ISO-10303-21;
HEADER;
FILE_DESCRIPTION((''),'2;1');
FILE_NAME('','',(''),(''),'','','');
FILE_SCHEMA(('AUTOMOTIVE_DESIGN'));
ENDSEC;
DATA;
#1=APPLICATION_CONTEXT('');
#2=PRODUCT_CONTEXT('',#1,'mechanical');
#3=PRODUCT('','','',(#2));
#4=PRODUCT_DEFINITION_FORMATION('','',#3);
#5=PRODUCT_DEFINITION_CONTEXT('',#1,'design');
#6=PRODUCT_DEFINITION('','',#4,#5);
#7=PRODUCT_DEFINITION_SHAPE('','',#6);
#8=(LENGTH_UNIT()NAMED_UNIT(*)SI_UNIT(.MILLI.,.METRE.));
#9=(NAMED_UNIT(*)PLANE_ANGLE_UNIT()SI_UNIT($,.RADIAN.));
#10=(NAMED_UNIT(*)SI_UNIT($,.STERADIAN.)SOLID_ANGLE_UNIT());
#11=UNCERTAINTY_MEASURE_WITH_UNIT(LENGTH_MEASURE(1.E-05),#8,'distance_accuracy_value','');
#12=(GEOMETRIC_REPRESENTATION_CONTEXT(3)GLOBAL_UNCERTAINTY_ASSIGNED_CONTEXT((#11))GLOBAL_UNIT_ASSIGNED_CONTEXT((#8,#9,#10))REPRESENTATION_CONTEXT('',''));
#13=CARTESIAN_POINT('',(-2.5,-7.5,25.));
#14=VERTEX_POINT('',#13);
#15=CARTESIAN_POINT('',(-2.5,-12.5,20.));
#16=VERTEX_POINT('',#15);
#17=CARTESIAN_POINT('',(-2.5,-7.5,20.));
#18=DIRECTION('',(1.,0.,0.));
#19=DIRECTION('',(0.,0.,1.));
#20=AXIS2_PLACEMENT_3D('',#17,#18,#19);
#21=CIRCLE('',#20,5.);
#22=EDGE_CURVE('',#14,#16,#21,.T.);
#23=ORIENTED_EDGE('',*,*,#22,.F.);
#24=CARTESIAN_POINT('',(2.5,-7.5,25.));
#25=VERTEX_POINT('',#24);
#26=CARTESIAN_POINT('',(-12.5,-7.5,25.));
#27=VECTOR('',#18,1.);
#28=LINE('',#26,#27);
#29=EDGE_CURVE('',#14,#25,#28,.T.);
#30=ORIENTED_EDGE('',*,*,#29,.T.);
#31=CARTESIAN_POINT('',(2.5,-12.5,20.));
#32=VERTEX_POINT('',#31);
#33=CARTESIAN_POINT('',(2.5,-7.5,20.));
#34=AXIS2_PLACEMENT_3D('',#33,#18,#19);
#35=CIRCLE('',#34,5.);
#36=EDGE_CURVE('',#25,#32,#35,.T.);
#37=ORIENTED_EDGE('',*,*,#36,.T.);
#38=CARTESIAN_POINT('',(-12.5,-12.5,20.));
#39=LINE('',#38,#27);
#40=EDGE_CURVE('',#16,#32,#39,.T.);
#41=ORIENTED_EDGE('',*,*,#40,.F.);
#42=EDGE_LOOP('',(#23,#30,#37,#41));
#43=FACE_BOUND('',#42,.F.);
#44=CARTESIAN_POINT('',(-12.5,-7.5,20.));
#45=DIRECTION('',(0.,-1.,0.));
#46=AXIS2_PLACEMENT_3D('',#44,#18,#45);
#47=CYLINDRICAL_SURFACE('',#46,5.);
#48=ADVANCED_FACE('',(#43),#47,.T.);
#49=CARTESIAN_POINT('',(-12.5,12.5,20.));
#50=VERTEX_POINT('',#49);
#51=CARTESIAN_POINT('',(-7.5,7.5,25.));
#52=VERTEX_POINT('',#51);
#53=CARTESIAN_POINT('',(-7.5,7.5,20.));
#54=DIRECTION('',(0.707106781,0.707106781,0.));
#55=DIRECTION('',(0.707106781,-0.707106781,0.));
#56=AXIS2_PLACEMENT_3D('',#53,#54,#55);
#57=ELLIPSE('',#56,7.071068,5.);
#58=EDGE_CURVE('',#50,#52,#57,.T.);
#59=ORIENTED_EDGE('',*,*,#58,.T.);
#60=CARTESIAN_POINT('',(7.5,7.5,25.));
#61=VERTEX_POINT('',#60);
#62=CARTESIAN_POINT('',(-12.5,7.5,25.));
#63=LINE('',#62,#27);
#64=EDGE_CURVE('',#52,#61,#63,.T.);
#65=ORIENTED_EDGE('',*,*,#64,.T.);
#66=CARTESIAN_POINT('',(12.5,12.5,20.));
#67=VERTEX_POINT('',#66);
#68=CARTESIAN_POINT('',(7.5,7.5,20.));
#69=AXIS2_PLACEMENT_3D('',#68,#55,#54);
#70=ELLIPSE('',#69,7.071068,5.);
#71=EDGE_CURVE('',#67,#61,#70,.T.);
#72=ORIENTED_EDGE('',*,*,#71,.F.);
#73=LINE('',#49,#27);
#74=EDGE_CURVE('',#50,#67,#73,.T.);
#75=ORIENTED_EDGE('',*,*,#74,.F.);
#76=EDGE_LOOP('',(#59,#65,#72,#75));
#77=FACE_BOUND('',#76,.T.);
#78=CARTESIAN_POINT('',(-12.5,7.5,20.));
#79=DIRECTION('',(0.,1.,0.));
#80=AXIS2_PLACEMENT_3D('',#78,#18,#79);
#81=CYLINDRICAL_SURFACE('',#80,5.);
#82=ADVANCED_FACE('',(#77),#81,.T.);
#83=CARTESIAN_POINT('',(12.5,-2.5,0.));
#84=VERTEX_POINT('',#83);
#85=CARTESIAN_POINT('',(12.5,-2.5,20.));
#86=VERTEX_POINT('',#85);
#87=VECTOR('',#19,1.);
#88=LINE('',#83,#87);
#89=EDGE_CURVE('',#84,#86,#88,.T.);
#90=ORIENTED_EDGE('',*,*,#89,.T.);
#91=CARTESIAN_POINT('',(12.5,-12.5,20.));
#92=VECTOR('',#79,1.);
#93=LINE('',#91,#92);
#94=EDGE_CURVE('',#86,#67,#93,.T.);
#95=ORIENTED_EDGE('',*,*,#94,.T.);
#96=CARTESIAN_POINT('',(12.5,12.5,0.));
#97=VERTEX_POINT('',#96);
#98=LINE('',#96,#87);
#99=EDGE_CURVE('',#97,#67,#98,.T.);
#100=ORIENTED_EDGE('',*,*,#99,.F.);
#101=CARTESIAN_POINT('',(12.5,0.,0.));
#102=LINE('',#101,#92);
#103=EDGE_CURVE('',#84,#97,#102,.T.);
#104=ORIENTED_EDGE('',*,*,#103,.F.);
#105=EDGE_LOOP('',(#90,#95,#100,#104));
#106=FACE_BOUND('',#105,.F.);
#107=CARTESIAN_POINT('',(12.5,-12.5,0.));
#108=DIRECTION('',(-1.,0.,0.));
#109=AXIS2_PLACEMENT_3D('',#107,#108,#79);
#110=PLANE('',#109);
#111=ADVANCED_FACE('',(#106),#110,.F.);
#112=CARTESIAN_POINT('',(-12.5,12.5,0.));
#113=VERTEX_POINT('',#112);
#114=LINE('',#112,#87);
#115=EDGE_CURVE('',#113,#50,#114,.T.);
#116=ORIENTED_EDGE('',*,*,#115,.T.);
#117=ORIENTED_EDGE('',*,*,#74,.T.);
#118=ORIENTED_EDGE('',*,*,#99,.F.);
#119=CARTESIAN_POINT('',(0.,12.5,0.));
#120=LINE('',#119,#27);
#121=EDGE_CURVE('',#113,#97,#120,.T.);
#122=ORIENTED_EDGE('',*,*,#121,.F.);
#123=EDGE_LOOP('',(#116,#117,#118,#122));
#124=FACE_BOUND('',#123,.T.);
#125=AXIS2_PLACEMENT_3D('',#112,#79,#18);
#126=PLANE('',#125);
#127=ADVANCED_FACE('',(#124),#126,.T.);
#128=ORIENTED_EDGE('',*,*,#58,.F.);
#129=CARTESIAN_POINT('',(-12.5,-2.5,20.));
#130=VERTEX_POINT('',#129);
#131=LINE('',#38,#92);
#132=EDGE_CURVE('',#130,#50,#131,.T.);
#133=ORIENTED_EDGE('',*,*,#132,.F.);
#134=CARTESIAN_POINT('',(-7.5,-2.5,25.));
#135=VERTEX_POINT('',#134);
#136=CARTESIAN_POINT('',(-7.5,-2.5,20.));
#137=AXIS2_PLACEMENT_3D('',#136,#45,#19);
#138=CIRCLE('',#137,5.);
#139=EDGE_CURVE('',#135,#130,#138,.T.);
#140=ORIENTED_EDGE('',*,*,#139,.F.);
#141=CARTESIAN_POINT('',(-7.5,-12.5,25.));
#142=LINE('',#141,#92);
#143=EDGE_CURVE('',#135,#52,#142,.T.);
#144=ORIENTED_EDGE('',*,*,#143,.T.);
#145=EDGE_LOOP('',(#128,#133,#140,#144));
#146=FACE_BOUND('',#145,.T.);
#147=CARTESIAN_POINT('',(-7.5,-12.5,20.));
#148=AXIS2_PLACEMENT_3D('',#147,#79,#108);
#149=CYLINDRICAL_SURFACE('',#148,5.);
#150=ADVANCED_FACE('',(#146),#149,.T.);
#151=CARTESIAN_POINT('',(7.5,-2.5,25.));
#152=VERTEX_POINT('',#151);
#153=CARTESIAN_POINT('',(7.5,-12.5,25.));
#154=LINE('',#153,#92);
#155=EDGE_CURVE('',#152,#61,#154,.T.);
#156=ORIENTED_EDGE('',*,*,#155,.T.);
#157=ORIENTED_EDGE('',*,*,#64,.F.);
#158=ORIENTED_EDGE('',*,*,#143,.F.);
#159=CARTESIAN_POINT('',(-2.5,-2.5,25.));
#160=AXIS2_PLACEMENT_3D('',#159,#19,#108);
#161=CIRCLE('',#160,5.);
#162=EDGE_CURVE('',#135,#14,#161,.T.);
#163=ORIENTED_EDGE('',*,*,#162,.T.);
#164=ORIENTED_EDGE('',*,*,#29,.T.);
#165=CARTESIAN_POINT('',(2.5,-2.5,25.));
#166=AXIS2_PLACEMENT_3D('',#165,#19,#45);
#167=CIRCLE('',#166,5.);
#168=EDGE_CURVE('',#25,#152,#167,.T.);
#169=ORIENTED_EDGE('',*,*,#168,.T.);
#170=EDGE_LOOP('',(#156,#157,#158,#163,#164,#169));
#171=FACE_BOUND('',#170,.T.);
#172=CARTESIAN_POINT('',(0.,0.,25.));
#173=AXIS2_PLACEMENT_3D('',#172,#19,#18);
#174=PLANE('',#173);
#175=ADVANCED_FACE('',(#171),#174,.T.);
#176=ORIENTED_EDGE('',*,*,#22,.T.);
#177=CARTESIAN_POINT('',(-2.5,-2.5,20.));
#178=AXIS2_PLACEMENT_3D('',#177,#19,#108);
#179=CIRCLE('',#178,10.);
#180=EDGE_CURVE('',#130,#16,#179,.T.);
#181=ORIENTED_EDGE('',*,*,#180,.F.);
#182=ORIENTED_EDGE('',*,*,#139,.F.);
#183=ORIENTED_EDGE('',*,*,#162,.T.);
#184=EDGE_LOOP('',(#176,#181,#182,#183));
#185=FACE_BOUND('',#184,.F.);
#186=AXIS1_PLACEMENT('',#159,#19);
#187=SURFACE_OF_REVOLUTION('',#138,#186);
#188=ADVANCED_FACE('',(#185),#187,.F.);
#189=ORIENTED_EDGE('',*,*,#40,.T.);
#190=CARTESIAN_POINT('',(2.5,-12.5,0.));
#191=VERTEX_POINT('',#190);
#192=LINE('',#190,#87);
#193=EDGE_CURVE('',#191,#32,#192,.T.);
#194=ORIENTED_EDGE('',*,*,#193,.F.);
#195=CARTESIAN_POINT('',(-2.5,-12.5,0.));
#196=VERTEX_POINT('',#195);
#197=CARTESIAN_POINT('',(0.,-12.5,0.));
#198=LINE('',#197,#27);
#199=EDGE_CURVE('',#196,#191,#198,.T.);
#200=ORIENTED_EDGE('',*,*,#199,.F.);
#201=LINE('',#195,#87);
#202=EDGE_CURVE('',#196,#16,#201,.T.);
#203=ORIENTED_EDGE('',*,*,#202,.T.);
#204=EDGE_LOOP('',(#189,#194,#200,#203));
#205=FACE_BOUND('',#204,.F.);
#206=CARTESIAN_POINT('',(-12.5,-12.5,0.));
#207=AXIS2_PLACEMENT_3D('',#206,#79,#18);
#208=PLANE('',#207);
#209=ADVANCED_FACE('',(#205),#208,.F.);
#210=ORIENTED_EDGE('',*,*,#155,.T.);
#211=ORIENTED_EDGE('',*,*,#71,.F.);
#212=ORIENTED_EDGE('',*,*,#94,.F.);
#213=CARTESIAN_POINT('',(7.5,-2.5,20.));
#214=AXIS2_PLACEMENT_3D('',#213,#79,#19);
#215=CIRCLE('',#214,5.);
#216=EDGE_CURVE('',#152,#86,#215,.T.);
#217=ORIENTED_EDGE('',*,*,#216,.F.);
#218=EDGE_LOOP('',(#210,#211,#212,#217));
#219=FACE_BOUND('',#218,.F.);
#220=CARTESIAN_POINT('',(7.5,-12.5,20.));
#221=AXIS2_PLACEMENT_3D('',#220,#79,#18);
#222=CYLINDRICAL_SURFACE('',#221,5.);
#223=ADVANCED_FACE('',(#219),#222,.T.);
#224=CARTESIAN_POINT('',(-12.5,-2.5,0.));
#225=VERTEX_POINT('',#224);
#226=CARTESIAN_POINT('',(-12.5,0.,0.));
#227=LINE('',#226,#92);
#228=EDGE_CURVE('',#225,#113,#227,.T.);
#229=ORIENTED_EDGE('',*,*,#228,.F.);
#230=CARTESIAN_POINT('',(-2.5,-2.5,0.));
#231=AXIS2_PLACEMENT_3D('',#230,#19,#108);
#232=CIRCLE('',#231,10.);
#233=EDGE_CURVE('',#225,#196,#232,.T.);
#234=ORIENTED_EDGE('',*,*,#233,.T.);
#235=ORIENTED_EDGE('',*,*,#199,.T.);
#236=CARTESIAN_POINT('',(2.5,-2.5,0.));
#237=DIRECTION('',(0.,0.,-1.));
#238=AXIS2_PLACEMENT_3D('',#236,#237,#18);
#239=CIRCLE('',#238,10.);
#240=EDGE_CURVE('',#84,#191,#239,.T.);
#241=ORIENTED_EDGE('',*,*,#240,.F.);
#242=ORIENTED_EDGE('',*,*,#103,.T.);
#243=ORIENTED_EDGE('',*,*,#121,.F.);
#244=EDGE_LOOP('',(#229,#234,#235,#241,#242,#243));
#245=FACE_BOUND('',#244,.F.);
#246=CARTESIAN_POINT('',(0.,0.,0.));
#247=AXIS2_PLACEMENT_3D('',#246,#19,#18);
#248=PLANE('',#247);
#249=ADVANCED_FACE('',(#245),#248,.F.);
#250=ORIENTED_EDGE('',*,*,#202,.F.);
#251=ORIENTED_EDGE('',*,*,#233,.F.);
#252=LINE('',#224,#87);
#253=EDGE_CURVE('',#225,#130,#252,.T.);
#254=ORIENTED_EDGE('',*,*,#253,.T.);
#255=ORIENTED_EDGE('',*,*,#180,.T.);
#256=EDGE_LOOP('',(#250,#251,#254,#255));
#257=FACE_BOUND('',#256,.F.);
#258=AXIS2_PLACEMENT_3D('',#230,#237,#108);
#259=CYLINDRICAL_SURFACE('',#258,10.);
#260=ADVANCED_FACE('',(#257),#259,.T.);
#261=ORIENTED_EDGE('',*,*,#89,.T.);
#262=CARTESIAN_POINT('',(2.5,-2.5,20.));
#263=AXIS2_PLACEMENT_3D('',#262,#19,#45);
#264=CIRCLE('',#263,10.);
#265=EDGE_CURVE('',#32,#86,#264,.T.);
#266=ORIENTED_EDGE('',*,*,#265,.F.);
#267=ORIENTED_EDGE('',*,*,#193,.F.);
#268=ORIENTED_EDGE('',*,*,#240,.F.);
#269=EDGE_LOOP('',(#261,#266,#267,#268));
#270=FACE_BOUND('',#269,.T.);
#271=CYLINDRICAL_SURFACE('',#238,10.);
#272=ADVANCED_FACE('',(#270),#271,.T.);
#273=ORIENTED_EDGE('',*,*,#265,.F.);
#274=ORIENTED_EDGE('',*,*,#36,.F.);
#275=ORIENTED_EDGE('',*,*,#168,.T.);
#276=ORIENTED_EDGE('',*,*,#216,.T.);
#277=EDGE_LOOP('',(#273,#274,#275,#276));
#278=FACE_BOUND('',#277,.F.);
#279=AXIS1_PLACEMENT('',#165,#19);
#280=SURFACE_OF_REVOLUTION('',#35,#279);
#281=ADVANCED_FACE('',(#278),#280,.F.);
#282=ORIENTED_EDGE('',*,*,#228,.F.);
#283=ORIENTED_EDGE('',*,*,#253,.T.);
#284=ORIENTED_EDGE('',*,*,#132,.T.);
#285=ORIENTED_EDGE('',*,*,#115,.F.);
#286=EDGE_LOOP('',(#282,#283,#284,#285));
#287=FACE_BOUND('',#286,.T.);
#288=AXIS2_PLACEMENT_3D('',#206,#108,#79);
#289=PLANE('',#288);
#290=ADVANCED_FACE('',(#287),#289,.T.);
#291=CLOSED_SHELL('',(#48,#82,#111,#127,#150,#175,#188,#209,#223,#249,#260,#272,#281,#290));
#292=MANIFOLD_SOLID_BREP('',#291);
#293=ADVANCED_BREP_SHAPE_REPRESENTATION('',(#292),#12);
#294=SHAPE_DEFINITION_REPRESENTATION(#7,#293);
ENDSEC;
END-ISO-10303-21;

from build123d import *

# Parameters (mm, degrees)
F0_W        = 25
F0_H        = 25
F1_DEPTH    = 25
F2_R        = 5
F3_T1_DEPTH = 25
F3_T4_ANGLE = 90
F3_T6_ANGLE = 90


# Not quite as in the source:
# - a fillet or chamfer that OpenCascade refuses, or shapes differently, is made with other operations: its cross-section is extruded or revolved along the edge and cut away or added


with BuildPart() as f1:
    # F0 (on Top) → F1 (new body)
    with BuildSketch(Plane.XY):
        Rectangle(F0_W, F0_H)
    extrude(amount=F1_DEPTH)

    # F2
    f2_edges = [f1.edges().sort_by_distance(p)[0] for p in [
        (0, 12.5, 25),
        (-12.5, 0, 25),
        (0, -12.5, 25),
        (12.5, 0, 25),
    ]]
    fillet(f2_edges, radius=F2_R)

    # F3: fillet of radius 10 on 2 edges, made by hand

    # F3_s2 → F3_t1 (cut)
    with BuildSketch(Plane.XY):
        with BuildLine():
            ThreePointArc((12.5, -2.5), (9.5710678119, -9.5710678119), (2.5, -12.5))
            Line((2.5, -12.5), (2.5, -12.7))
            Line((2.5, -12.7), (12.7, -12.7))
            Line((12.7, -12.7), (12.7, -2.5))
            Line((12.7, -2.5), (12.5, -2.5))
        make_face()
        with BuildLine():
            ThreePointArc((-12.5, -2.5), (-9.5710678119, -9.5710678119), (-2.5, -12.5))
            Line((-2.5, -12.5), (-2.5, -12.7))
            Line((-2.5, -12.7), (-12.7, -12.7))
            Line((-12.7, -12.7), (-12.7, -2.5))
            Line((-12.7, -2.5), (-12.5, -2.5))
        make_face()
    extrude(amount=F3_T1_DEPTH, mode=Mode.SUBTRACT)

    # F3_s3 → F3_t4 (revolve, cut)
    with BuildSketch(Plane.XZ.offset(2.5)):
        with BuildLine():
            ThreePointArc((-7.5, 25), (-11.0355339059, 23.5355339059), (-12.5, 20))
            Line((-12.5, 20), (-12.5, 25))
            Line((-12.5, 25), (-7.5, 25))
        make_face()
    revolve(axis=Axis((-2.5, -2.5, 25), (0, 0, 1)), revolution_arc=F3_T4_ANGLE, mode=Mode.SUBTRACT)

    # F3_s5 → F3_t6 (revolve, cut)
    with BuildSketch(Plane.YZ.offset(2.5)):
        with BuildLine():
            ThreePointArc((-7.5, 25), (-11.0355339059, 23.5355339059), (-12.5, 20))
            Line((-12.5, 20), (-12.5, 25))
            Line((-12.5, 25), (-7.5, 25))
        make_face()
    revolve(axis=Axis((2.5, -2.5, 25), (0, 0, 1)), revolution_arc=F3_T6_ANGLE, mode=Mode.SUBTRACT)


solid = f1.part
